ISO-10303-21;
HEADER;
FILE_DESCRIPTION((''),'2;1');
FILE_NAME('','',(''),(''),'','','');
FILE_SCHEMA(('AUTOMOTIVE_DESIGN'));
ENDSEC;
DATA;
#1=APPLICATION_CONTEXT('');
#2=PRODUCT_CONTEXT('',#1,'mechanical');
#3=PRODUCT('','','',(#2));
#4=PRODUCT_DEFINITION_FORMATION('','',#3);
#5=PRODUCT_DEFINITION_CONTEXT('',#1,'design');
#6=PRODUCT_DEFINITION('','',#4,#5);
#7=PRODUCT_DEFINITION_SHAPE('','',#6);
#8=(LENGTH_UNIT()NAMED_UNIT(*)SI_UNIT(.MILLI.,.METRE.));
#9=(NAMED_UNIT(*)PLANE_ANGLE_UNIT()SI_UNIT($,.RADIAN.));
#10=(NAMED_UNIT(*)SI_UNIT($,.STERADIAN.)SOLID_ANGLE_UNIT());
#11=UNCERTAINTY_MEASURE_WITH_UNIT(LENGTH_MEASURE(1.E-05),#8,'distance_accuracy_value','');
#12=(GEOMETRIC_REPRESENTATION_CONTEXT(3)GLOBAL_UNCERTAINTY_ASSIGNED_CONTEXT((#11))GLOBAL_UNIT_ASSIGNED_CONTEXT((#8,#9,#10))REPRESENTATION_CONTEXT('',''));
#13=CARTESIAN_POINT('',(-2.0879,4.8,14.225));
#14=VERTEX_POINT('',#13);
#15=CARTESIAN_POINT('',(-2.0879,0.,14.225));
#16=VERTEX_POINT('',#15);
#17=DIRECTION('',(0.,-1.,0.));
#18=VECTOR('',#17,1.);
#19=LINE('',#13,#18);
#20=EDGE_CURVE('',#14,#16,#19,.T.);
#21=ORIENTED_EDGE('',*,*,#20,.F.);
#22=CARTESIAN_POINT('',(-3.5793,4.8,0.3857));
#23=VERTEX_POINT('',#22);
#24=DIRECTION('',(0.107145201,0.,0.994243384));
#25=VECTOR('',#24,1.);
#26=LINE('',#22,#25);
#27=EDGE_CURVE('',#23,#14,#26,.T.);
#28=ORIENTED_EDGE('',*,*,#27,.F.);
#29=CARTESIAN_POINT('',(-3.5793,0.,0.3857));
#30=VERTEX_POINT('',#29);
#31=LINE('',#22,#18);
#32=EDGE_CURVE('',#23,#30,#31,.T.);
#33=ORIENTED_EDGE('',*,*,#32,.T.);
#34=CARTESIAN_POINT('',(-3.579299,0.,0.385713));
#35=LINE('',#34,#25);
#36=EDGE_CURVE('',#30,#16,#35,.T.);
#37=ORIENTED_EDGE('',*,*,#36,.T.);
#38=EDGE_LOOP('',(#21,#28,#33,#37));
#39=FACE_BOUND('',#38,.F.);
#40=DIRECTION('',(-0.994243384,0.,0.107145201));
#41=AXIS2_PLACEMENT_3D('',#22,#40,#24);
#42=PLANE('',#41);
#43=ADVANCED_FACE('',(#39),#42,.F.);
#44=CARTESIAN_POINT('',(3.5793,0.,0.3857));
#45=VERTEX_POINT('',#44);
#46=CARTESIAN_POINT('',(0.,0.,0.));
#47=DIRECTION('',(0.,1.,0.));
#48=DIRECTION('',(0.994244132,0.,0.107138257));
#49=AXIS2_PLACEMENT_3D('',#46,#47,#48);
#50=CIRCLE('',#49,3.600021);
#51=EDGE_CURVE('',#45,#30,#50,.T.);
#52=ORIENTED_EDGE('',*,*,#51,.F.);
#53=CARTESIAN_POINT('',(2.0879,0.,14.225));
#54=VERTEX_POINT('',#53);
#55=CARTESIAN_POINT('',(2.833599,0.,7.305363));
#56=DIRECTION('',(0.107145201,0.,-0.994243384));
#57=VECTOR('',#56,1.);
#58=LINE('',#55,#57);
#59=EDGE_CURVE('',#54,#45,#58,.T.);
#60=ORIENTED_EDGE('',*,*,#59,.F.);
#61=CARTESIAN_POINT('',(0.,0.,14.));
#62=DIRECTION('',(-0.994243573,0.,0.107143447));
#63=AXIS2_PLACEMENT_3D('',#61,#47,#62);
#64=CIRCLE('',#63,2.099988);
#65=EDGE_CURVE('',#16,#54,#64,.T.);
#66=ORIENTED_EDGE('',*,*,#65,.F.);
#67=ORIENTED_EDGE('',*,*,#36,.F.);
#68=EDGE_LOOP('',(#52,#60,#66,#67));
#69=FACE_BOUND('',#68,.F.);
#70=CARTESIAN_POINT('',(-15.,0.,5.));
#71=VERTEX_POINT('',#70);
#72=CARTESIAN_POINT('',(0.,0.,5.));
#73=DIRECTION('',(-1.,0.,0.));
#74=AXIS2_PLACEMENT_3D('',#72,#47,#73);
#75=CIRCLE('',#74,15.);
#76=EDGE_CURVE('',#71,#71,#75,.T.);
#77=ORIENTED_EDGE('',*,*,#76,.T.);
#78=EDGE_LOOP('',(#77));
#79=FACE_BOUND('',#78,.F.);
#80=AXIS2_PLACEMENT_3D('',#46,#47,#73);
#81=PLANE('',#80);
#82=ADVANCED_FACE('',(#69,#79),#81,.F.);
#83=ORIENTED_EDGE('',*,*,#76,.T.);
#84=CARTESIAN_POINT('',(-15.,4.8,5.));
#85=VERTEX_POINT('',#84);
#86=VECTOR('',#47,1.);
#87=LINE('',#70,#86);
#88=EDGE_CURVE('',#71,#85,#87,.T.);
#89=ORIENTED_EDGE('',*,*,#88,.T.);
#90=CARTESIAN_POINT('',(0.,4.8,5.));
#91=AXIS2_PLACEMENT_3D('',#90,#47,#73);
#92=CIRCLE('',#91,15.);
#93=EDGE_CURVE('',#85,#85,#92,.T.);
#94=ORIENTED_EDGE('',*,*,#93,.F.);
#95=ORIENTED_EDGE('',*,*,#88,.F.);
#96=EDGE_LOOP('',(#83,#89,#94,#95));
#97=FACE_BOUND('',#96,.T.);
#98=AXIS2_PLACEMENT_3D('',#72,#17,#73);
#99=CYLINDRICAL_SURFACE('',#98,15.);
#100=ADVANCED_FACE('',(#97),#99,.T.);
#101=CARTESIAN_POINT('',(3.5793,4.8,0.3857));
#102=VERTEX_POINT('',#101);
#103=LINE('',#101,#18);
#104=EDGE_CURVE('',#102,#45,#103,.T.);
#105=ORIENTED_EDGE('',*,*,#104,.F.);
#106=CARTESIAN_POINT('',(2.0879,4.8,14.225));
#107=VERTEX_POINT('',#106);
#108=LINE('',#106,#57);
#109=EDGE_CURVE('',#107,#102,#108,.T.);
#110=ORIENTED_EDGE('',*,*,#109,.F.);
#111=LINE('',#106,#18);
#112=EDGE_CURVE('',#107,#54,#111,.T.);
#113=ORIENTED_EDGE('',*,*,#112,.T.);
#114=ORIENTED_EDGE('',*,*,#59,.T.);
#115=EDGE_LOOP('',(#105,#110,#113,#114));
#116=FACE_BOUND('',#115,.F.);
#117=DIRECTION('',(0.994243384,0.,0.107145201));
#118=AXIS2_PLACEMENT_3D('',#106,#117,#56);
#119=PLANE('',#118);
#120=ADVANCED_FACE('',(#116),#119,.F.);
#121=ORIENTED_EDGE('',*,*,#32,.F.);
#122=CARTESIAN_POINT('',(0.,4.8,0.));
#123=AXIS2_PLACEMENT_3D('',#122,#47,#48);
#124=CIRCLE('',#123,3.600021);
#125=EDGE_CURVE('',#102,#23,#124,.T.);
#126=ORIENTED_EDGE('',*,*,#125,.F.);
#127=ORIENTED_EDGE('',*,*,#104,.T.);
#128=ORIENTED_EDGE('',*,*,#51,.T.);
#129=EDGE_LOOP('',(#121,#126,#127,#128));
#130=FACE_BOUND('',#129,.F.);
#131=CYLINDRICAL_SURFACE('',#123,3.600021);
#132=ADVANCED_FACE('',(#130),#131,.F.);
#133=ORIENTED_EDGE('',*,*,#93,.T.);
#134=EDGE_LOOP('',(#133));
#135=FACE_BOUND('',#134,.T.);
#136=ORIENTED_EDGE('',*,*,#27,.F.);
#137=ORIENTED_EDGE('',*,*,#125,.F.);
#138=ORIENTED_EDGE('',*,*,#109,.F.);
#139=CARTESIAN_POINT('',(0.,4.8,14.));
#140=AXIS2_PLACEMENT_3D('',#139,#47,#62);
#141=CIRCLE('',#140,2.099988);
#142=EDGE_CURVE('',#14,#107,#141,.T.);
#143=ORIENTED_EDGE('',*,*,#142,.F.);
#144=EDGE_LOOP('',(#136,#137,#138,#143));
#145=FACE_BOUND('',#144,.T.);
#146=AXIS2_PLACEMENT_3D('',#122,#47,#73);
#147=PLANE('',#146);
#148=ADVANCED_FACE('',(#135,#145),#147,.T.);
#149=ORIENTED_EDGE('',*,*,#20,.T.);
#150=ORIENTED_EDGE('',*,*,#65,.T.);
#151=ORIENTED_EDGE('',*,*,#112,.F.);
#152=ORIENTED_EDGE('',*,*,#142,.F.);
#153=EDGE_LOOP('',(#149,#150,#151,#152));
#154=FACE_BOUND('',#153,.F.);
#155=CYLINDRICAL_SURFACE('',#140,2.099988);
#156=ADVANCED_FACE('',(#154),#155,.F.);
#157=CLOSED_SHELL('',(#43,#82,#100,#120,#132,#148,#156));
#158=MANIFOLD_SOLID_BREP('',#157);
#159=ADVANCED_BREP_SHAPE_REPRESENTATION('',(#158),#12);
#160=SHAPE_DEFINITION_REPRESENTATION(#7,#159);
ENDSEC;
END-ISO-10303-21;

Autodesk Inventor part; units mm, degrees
ref_plane "YZ Plane" through (0, 0, 0) normal (1, 0, 0) x (0, 1, 0)
ref_plane "XZ Plane" through (0, 0, 0) normal (0, 1, 0) x (-1, 0, 0)
ref_plane "XY Plane" through (0, 0, 0) normal (0, 0, 1) x (1, 0, 0)
sketch "Sketch1" plane through (0, 0, 0) normal (0, 1, 0) x (-1, 0, 0)
  circle A0 centre (0, 0) radius 20 construction
  circle A1 centre (0, 5) radius 15
  circle A2 centre (0, 0) radius 3.5
  circle A3 centre (0, 14) radius 2
  line L0 (-1.9885, 14.2143) -> (-3.4799, 0.375)
  line L1 (1.9885, 14.2143) -> (3.4799, 0.375)
  dimension "d0" = 40
  dimension "d1" = 30
  dimension "d2" = 7
  dimension "d3" = 4
  dimension "d4" = 19.5
extrude "Extrusion1" add sketch "Sketch1" along normal blind 4.8
sketch "Sketch2" plane through (0, 4.8, 5) normal (0, 1, 0) x (1, 0, 0)
  arc A0 (-1.9885, -9.2143) -> (1.9885, -9.2143) centre (0, -9) ccw projected
  line L0 (1.9885, -9.2143) -> (3.4799, 4.625) projected
  arc A1 (3.4799, 4.625) -> (-3.4799, 4.625) centre (0, 5) ccw projected
  line L1 (-3.4799, 4.625) -> (-1.9885, -9.2143) projected
  circle A2 centre (0, 0) radius 15 projected
  arc A3 (-2.0879, -9.225) -> (2.0879, -9.225) centre (0, -9) ccw
  line L2 (2.0879, -9.225) -> (3.5793, 4.6143)
  arc A4 (3.5793, 4.6143) -> (-3.5793, 4.6143) centre (0, 5) ccw
  line L3 (-3.5793, 4.6143) -> (-2.0879, -9.225)
  dimension "d7" = 0.1
extrude "Extrusion2" cut sketch "Sketch2" against normal through all contours L3 A4 L2 A3
properties part number "Ventil Scheibe_3DPrint"
